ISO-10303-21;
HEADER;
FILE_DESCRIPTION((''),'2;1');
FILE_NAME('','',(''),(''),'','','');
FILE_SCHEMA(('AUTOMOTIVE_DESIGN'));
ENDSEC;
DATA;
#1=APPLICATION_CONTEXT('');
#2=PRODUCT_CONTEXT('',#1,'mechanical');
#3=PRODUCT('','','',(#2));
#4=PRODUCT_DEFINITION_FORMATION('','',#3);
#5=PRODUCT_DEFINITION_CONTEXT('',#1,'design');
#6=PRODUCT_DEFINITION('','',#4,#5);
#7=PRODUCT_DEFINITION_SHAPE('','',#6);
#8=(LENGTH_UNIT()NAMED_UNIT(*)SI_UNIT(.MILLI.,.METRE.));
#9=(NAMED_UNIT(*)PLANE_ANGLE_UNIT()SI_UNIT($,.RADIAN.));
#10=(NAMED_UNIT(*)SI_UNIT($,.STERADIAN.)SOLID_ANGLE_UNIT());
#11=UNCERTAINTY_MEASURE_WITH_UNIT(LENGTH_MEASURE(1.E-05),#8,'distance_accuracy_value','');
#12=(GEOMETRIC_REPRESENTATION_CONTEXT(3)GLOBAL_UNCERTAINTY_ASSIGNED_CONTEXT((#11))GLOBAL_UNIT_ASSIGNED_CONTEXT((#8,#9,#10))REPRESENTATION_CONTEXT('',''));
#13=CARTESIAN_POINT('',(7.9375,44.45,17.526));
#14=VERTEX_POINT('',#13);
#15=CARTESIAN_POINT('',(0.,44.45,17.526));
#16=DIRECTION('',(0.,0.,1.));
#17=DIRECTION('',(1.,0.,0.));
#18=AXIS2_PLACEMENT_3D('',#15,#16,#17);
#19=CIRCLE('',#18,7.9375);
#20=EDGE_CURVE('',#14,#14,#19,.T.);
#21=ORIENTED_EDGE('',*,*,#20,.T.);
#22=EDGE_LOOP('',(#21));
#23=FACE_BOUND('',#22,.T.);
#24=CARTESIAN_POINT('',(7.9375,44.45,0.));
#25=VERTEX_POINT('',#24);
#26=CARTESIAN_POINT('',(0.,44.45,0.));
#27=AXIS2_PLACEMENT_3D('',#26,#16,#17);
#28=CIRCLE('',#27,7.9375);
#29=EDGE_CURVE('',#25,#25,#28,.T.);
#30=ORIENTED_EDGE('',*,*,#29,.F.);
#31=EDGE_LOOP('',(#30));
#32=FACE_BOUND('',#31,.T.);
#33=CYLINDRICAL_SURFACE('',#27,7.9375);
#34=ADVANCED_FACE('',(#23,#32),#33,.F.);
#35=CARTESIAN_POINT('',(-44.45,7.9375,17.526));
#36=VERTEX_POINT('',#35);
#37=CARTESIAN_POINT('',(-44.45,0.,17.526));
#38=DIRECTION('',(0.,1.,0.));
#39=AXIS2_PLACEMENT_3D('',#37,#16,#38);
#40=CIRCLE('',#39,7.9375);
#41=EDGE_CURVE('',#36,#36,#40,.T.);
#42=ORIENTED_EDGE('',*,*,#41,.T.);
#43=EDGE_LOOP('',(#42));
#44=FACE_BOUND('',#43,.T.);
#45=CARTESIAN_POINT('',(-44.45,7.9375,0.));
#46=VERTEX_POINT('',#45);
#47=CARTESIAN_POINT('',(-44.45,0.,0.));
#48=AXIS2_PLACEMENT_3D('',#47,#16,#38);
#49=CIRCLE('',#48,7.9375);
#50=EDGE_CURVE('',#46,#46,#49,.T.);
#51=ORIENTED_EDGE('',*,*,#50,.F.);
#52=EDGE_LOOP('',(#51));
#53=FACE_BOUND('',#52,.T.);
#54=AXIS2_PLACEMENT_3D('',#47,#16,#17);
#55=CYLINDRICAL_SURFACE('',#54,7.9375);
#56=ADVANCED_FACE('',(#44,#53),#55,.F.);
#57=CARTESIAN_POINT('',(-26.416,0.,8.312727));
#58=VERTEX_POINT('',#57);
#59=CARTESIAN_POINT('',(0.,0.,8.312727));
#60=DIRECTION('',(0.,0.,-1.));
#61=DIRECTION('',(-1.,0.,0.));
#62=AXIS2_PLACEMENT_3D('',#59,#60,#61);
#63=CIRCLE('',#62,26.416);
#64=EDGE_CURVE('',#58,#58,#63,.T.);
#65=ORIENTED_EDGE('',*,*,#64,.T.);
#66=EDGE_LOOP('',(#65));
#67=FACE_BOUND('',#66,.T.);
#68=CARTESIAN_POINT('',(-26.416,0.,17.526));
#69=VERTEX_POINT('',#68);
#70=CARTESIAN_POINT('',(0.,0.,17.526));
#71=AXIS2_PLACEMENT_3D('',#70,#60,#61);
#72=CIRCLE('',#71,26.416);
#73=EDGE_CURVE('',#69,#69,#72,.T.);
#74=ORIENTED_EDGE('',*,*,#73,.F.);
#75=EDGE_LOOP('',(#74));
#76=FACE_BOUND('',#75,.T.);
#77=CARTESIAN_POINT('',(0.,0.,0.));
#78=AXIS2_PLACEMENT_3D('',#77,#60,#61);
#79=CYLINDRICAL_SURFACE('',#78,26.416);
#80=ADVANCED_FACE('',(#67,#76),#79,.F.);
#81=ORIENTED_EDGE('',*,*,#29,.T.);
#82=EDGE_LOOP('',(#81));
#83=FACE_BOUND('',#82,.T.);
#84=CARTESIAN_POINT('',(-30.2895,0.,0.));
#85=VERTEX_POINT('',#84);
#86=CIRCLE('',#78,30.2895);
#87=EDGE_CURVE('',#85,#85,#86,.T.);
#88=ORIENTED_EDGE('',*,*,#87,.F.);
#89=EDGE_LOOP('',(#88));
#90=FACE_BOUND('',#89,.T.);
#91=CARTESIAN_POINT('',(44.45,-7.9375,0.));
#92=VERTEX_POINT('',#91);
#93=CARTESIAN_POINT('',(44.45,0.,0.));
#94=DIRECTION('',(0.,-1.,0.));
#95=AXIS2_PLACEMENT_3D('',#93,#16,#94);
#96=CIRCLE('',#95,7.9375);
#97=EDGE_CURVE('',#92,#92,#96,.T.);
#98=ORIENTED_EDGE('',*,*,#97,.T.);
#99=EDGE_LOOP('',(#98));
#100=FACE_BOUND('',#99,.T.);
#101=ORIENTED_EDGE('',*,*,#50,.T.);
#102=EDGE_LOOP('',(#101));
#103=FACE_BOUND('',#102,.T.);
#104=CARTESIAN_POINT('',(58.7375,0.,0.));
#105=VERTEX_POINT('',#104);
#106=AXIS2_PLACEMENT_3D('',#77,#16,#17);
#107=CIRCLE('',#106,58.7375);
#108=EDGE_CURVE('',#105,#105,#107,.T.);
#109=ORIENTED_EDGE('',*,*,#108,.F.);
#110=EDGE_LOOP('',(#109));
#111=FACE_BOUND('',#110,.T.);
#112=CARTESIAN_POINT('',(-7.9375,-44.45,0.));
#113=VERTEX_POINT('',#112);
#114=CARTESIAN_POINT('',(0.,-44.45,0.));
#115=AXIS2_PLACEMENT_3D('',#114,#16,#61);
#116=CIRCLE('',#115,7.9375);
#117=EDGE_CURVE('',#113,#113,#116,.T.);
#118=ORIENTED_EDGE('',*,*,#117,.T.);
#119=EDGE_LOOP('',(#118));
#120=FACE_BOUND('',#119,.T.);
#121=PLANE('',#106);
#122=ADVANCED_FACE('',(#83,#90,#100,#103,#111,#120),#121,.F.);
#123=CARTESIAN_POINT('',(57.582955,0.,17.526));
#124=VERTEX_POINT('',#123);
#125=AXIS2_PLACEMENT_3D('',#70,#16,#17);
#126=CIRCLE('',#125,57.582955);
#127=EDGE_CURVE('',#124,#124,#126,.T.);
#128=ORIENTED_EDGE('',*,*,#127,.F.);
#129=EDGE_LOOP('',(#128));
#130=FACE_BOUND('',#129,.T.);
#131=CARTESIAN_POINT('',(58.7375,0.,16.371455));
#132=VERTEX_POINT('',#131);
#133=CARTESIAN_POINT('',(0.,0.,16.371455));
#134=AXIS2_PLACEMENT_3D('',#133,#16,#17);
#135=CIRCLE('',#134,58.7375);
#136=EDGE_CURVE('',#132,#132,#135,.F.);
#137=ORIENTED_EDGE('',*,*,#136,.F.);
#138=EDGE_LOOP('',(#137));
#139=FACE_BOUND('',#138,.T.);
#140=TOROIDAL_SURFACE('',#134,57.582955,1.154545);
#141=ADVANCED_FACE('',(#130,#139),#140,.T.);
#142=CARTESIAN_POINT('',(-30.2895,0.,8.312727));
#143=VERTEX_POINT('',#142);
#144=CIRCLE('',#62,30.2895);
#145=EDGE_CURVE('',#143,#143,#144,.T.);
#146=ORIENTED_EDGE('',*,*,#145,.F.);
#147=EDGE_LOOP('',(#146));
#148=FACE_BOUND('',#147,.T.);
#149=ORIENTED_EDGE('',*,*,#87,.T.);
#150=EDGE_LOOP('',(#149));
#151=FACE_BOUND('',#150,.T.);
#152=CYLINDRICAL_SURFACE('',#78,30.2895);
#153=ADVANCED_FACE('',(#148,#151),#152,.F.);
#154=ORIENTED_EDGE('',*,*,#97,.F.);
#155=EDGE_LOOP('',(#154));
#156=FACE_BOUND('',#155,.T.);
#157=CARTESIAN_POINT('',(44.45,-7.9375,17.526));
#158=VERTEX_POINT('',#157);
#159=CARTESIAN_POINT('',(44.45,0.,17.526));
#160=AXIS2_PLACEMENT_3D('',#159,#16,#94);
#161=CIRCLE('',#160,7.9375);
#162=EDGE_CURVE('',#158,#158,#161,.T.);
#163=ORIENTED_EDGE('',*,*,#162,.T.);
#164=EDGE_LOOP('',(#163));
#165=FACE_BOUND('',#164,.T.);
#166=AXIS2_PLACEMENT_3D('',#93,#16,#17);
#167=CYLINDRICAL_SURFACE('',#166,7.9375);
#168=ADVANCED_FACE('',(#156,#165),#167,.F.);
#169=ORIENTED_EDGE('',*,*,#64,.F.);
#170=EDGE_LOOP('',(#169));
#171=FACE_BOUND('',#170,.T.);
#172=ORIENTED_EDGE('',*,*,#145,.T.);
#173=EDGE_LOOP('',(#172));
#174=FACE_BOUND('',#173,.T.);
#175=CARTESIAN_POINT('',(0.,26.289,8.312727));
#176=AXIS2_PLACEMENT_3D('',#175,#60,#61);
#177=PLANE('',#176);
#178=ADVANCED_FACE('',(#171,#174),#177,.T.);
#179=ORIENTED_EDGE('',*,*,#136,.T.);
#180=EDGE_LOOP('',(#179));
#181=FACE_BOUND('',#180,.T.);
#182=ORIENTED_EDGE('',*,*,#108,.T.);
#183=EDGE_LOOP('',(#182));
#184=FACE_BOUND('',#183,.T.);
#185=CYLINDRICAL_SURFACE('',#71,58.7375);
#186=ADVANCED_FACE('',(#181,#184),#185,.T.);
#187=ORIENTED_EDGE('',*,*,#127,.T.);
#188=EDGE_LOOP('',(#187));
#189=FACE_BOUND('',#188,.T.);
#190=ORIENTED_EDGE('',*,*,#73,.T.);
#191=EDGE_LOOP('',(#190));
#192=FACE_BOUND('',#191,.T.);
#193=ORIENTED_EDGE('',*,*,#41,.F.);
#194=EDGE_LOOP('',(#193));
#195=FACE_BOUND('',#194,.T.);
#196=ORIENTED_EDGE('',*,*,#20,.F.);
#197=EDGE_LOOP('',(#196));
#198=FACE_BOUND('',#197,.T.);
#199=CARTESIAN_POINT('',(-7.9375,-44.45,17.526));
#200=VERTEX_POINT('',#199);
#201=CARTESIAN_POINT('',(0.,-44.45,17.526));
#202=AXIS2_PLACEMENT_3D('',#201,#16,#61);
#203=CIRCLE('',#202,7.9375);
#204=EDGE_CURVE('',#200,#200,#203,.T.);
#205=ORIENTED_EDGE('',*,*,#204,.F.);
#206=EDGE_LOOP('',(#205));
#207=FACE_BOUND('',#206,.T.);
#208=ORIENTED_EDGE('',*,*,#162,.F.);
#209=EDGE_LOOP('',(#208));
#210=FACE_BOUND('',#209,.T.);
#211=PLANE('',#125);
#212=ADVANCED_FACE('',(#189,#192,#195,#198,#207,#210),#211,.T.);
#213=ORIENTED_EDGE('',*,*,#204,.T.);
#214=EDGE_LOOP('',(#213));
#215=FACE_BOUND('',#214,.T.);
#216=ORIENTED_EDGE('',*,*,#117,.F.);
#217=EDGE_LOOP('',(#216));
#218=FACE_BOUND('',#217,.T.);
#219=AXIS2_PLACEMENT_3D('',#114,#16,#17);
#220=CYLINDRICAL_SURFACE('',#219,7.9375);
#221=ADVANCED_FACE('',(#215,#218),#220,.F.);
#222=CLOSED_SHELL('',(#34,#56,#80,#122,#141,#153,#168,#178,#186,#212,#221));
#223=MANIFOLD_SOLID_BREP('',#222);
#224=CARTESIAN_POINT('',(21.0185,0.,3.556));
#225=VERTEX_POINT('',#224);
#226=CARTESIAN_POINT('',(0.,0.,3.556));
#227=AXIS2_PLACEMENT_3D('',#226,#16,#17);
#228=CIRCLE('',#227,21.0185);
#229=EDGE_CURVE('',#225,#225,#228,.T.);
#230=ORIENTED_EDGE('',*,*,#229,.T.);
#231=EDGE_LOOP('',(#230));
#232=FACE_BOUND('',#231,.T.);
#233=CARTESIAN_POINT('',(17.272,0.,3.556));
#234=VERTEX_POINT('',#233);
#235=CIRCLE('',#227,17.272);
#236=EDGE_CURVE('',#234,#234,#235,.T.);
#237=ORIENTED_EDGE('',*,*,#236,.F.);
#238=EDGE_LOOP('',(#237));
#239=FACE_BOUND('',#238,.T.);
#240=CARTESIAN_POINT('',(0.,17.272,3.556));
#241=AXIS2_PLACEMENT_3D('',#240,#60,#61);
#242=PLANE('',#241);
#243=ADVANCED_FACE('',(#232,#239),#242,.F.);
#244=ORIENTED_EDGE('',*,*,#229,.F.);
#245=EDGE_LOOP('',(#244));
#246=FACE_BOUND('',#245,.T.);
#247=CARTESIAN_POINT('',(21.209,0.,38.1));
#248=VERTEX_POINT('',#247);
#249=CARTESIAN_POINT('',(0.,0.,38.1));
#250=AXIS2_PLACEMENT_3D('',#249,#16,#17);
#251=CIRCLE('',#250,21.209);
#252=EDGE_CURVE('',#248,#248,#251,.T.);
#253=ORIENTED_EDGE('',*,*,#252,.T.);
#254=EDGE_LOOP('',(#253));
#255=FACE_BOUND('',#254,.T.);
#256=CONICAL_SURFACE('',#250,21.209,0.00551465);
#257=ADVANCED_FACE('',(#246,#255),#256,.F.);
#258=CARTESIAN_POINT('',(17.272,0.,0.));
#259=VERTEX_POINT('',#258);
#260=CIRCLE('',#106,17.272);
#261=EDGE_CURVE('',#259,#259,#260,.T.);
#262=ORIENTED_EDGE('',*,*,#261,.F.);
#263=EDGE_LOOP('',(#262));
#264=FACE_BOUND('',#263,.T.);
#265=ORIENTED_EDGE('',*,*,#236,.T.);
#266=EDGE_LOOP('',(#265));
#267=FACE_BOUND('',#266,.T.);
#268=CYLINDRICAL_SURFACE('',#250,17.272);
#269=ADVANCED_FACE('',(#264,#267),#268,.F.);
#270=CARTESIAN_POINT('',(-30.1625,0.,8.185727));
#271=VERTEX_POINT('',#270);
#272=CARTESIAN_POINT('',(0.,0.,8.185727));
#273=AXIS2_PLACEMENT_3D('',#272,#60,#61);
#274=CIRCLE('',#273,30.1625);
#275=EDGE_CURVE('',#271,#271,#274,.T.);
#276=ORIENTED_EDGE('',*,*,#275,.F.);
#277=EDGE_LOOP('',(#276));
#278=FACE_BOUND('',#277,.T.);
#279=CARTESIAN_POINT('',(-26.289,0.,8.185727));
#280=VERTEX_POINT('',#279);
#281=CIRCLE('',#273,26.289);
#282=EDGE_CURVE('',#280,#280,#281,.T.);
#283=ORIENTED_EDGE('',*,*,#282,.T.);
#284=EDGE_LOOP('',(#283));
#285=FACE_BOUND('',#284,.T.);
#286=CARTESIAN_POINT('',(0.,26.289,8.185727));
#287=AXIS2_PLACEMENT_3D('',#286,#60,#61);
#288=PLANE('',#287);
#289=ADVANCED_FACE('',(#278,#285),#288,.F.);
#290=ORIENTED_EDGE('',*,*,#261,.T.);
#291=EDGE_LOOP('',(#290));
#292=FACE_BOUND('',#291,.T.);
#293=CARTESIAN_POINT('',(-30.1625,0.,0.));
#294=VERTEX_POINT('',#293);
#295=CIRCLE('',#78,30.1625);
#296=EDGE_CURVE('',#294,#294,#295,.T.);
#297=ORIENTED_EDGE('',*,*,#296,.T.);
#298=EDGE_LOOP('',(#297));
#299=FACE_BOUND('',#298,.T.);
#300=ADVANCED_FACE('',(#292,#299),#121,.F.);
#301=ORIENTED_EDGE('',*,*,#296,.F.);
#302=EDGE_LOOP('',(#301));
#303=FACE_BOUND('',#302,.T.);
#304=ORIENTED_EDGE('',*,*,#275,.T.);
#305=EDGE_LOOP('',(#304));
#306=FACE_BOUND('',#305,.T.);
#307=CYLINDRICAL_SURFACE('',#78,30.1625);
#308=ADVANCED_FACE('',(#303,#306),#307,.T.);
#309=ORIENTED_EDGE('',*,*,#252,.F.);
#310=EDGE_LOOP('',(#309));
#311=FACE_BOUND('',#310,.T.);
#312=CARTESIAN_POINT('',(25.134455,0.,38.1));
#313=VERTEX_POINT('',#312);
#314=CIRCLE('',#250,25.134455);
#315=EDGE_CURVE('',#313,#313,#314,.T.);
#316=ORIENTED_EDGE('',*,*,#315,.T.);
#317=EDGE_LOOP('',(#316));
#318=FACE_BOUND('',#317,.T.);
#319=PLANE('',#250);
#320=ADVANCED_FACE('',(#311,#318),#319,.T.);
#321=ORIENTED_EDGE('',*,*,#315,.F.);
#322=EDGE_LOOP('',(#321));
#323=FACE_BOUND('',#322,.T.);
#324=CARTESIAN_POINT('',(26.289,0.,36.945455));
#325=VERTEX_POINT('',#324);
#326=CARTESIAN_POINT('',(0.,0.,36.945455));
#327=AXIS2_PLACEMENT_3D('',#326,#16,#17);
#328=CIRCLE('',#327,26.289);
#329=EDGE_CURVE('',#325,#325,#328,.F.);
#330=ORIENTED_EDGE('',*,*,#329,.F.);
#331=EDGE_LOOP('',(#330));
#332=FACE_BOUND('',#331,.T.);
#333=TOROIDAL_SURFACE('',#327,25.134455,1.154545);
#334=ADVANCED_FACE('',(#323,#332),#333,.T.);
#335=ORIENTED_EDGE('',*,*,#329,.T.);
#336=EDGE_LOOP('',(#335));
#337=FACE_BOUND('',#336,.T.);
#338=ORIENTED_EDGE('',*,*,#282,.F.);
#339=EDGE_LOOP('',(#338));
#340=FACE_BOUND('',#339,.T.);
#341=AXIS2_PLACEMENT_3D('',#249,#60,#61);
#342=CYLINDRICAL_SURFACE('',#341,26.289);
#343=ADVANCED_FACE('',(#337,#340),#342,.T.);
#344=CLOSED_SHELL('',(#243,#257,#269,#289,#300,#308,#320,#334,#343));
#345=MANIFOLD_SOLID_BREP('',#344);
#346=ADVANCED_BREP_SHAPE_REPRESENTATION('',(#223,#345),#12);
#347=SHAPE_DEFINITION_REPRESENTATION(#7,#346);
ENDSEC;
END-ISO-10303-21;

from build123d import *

# Parameters (mm, degrees)
SKETCH1_R                       = 58.7375
EXTRUDE1_DEPTH                  = 17.526
SKETCH2_R                       = 26.289
EXTRUDE2_DEPTH                  = 20.574
SKETCH3_R                       = 7.9375
EXTRUDE3_DEPTH                  = 86.577317605
CIRPATTERN1_COUNT               = 4
FILLET1_R                       = 1.154545455
CUT_REVOLVE_THIN1_OUTLINE_R     = 30.2895
CUT_REVOLVE_THIN1_OUTLINE_R_2   = 30.1625
CUT_REVOLVE_THIN1_DEPTH         = 8.312727273
CUT_REVOLVE_THIN1_START         = 8.185727273
CUT_REVOLVE_THIN1_2_OUTLINE_R   = 26.416
CUT_REVOLVE_THIN1_2_OUTLINE_R_2 = 26.289
CUT_REVOLVE_THIN1_2_DEPTH       = 9.340272727
CUT_REVOLVE_THIN1_3_OUTLINE_R   = 30.1625
CUT_REVOLVE_THIN1_3_OUTLINE_R_2 = 26.416
CUT_REVOLVE_THIN1_3_DEPTH       = 0.127


# Read off the part's stored shape, not the designer's step: Cut-Revolve-Thin1
with BuildPart() as part:
    # Sketch1 → Extrude1 (new body)
    with BuildSketch(Plane.XY):
        Circle(SKETCH1_R)
    extrude(amount=EXTRUDE1_DEPTH)

    # Sketch2 → Extrude2 (add)
    with BuildSketch(Plane.XY.offset(17.526)):
        Circle(SKETCH2_R)
    extrude(amount=EXTRUDE2_DEPTH)

    # Sketch3 → Extrude3 (cut, through all)
    with BuildSketch(Plane.XY.offset(17.526)):
        with Locations((0, 44.45)):
            Circle(SKETCH3_R)
    extrude3 = extrude(amount=-EXTRUDE3_DEPTH, mode=Mode.SUBTRACT)

    # CirPattern1: Extrude3 ×4 about axis
    cirpattern1_axis = Axis((0, 0, 0), (0, 0, 1))
    for i in range(1, CIRPATTERN1_COUNT):
        add(extrude3.rotate(cirpattern1_axis, i * 360 / CIRPATTERN1_COUNT), mode=Mode.SUBTRACT)

    # Fillet1
    fillet1_edges = [part.edges().sort_by_distance(p)[0] for p in [
        (-58.7375, 0, 17.526),
        (-26.289, 0, 38.1),
    ]]
    fillet(fillet1_edges, radius=FILLET1_R)

    # Sketch4 → Cut-Revolve1 (revolve, cut)
    with BuildSketch(Plane(origin=(0, 0, 62.70625), x_dir=(0, 0, 1), z_dir=(-1, 0, 0)), mode=Mode.PRIVATE) as cut_revolve1_sk:
        Polygon((-62.70625, 17.272), (-59.15025, 17.272), (-59.15025, 21.0185), (-24.60625, 21.209), (-24.60625, 0), (-62.70625, 0), align=None)
    revolve(cut_revolve1_sk.sketch.rotate(Axis((0, 0, 38.1), (0, 0, -1)), 90), axis=Axis((0, 0, 38.1), (0, 0, -1)), mode=Mode.SUBTRACT)

    # Cut-Revolve-Thin1 outline → Cut-Revolve-Thin1 (cut)
    with BuildSketch(Plane.XY):
        Circle(CUT_REVOLVE_THIN1_OUTLINE_R)
        Circle(CUT_REVOLVE_THIN1_OUTLINE_R_2, mode=Mode.SUBTRACT)
    extrude(amount=CUT_REVOLVE_THIN1_DEPTH, mode=Mode.SUBTRACT)

    # Cut-Revolve-Thin1 2 outline → Cut-Revolve-Thin1 2 (cut)
    with BuildSketch(Plane.XY.offset(CUT_REVOLVE_THIN1_START)):
        Circle(CUT_REVOLVE_THIN1_2_OUTLINE_R)
        Circle(CUT_REVOLVE_THIN1_2_OUTLINE_R_2, mode=Mode.SUBTRACT)
    extrude(amount=CUT_REVOLVE_THIN1_2_DEPTH, mode=Mode.SUBTRACT)

    # Cut-Revolve-Thin1 3 outline → Cut-Revolve-Thin1 3 (cut)
    with BuildSketch(Plane.XY.offset(CUT_REVOLVE_THIN1_START)):
        Circle(CUT_REVOLVE_THIN1_3_OUTLINE_R)
        Circle(CUT_REVOLVE_THIN1_3_OUTLINE_R_2, mode=Mode.SUBTRACT)
    extrude(amount=CUT_REVOLVE_THIN1_3_DEPTH, mode=Mode.SUBTRACT)


solid = part.part
